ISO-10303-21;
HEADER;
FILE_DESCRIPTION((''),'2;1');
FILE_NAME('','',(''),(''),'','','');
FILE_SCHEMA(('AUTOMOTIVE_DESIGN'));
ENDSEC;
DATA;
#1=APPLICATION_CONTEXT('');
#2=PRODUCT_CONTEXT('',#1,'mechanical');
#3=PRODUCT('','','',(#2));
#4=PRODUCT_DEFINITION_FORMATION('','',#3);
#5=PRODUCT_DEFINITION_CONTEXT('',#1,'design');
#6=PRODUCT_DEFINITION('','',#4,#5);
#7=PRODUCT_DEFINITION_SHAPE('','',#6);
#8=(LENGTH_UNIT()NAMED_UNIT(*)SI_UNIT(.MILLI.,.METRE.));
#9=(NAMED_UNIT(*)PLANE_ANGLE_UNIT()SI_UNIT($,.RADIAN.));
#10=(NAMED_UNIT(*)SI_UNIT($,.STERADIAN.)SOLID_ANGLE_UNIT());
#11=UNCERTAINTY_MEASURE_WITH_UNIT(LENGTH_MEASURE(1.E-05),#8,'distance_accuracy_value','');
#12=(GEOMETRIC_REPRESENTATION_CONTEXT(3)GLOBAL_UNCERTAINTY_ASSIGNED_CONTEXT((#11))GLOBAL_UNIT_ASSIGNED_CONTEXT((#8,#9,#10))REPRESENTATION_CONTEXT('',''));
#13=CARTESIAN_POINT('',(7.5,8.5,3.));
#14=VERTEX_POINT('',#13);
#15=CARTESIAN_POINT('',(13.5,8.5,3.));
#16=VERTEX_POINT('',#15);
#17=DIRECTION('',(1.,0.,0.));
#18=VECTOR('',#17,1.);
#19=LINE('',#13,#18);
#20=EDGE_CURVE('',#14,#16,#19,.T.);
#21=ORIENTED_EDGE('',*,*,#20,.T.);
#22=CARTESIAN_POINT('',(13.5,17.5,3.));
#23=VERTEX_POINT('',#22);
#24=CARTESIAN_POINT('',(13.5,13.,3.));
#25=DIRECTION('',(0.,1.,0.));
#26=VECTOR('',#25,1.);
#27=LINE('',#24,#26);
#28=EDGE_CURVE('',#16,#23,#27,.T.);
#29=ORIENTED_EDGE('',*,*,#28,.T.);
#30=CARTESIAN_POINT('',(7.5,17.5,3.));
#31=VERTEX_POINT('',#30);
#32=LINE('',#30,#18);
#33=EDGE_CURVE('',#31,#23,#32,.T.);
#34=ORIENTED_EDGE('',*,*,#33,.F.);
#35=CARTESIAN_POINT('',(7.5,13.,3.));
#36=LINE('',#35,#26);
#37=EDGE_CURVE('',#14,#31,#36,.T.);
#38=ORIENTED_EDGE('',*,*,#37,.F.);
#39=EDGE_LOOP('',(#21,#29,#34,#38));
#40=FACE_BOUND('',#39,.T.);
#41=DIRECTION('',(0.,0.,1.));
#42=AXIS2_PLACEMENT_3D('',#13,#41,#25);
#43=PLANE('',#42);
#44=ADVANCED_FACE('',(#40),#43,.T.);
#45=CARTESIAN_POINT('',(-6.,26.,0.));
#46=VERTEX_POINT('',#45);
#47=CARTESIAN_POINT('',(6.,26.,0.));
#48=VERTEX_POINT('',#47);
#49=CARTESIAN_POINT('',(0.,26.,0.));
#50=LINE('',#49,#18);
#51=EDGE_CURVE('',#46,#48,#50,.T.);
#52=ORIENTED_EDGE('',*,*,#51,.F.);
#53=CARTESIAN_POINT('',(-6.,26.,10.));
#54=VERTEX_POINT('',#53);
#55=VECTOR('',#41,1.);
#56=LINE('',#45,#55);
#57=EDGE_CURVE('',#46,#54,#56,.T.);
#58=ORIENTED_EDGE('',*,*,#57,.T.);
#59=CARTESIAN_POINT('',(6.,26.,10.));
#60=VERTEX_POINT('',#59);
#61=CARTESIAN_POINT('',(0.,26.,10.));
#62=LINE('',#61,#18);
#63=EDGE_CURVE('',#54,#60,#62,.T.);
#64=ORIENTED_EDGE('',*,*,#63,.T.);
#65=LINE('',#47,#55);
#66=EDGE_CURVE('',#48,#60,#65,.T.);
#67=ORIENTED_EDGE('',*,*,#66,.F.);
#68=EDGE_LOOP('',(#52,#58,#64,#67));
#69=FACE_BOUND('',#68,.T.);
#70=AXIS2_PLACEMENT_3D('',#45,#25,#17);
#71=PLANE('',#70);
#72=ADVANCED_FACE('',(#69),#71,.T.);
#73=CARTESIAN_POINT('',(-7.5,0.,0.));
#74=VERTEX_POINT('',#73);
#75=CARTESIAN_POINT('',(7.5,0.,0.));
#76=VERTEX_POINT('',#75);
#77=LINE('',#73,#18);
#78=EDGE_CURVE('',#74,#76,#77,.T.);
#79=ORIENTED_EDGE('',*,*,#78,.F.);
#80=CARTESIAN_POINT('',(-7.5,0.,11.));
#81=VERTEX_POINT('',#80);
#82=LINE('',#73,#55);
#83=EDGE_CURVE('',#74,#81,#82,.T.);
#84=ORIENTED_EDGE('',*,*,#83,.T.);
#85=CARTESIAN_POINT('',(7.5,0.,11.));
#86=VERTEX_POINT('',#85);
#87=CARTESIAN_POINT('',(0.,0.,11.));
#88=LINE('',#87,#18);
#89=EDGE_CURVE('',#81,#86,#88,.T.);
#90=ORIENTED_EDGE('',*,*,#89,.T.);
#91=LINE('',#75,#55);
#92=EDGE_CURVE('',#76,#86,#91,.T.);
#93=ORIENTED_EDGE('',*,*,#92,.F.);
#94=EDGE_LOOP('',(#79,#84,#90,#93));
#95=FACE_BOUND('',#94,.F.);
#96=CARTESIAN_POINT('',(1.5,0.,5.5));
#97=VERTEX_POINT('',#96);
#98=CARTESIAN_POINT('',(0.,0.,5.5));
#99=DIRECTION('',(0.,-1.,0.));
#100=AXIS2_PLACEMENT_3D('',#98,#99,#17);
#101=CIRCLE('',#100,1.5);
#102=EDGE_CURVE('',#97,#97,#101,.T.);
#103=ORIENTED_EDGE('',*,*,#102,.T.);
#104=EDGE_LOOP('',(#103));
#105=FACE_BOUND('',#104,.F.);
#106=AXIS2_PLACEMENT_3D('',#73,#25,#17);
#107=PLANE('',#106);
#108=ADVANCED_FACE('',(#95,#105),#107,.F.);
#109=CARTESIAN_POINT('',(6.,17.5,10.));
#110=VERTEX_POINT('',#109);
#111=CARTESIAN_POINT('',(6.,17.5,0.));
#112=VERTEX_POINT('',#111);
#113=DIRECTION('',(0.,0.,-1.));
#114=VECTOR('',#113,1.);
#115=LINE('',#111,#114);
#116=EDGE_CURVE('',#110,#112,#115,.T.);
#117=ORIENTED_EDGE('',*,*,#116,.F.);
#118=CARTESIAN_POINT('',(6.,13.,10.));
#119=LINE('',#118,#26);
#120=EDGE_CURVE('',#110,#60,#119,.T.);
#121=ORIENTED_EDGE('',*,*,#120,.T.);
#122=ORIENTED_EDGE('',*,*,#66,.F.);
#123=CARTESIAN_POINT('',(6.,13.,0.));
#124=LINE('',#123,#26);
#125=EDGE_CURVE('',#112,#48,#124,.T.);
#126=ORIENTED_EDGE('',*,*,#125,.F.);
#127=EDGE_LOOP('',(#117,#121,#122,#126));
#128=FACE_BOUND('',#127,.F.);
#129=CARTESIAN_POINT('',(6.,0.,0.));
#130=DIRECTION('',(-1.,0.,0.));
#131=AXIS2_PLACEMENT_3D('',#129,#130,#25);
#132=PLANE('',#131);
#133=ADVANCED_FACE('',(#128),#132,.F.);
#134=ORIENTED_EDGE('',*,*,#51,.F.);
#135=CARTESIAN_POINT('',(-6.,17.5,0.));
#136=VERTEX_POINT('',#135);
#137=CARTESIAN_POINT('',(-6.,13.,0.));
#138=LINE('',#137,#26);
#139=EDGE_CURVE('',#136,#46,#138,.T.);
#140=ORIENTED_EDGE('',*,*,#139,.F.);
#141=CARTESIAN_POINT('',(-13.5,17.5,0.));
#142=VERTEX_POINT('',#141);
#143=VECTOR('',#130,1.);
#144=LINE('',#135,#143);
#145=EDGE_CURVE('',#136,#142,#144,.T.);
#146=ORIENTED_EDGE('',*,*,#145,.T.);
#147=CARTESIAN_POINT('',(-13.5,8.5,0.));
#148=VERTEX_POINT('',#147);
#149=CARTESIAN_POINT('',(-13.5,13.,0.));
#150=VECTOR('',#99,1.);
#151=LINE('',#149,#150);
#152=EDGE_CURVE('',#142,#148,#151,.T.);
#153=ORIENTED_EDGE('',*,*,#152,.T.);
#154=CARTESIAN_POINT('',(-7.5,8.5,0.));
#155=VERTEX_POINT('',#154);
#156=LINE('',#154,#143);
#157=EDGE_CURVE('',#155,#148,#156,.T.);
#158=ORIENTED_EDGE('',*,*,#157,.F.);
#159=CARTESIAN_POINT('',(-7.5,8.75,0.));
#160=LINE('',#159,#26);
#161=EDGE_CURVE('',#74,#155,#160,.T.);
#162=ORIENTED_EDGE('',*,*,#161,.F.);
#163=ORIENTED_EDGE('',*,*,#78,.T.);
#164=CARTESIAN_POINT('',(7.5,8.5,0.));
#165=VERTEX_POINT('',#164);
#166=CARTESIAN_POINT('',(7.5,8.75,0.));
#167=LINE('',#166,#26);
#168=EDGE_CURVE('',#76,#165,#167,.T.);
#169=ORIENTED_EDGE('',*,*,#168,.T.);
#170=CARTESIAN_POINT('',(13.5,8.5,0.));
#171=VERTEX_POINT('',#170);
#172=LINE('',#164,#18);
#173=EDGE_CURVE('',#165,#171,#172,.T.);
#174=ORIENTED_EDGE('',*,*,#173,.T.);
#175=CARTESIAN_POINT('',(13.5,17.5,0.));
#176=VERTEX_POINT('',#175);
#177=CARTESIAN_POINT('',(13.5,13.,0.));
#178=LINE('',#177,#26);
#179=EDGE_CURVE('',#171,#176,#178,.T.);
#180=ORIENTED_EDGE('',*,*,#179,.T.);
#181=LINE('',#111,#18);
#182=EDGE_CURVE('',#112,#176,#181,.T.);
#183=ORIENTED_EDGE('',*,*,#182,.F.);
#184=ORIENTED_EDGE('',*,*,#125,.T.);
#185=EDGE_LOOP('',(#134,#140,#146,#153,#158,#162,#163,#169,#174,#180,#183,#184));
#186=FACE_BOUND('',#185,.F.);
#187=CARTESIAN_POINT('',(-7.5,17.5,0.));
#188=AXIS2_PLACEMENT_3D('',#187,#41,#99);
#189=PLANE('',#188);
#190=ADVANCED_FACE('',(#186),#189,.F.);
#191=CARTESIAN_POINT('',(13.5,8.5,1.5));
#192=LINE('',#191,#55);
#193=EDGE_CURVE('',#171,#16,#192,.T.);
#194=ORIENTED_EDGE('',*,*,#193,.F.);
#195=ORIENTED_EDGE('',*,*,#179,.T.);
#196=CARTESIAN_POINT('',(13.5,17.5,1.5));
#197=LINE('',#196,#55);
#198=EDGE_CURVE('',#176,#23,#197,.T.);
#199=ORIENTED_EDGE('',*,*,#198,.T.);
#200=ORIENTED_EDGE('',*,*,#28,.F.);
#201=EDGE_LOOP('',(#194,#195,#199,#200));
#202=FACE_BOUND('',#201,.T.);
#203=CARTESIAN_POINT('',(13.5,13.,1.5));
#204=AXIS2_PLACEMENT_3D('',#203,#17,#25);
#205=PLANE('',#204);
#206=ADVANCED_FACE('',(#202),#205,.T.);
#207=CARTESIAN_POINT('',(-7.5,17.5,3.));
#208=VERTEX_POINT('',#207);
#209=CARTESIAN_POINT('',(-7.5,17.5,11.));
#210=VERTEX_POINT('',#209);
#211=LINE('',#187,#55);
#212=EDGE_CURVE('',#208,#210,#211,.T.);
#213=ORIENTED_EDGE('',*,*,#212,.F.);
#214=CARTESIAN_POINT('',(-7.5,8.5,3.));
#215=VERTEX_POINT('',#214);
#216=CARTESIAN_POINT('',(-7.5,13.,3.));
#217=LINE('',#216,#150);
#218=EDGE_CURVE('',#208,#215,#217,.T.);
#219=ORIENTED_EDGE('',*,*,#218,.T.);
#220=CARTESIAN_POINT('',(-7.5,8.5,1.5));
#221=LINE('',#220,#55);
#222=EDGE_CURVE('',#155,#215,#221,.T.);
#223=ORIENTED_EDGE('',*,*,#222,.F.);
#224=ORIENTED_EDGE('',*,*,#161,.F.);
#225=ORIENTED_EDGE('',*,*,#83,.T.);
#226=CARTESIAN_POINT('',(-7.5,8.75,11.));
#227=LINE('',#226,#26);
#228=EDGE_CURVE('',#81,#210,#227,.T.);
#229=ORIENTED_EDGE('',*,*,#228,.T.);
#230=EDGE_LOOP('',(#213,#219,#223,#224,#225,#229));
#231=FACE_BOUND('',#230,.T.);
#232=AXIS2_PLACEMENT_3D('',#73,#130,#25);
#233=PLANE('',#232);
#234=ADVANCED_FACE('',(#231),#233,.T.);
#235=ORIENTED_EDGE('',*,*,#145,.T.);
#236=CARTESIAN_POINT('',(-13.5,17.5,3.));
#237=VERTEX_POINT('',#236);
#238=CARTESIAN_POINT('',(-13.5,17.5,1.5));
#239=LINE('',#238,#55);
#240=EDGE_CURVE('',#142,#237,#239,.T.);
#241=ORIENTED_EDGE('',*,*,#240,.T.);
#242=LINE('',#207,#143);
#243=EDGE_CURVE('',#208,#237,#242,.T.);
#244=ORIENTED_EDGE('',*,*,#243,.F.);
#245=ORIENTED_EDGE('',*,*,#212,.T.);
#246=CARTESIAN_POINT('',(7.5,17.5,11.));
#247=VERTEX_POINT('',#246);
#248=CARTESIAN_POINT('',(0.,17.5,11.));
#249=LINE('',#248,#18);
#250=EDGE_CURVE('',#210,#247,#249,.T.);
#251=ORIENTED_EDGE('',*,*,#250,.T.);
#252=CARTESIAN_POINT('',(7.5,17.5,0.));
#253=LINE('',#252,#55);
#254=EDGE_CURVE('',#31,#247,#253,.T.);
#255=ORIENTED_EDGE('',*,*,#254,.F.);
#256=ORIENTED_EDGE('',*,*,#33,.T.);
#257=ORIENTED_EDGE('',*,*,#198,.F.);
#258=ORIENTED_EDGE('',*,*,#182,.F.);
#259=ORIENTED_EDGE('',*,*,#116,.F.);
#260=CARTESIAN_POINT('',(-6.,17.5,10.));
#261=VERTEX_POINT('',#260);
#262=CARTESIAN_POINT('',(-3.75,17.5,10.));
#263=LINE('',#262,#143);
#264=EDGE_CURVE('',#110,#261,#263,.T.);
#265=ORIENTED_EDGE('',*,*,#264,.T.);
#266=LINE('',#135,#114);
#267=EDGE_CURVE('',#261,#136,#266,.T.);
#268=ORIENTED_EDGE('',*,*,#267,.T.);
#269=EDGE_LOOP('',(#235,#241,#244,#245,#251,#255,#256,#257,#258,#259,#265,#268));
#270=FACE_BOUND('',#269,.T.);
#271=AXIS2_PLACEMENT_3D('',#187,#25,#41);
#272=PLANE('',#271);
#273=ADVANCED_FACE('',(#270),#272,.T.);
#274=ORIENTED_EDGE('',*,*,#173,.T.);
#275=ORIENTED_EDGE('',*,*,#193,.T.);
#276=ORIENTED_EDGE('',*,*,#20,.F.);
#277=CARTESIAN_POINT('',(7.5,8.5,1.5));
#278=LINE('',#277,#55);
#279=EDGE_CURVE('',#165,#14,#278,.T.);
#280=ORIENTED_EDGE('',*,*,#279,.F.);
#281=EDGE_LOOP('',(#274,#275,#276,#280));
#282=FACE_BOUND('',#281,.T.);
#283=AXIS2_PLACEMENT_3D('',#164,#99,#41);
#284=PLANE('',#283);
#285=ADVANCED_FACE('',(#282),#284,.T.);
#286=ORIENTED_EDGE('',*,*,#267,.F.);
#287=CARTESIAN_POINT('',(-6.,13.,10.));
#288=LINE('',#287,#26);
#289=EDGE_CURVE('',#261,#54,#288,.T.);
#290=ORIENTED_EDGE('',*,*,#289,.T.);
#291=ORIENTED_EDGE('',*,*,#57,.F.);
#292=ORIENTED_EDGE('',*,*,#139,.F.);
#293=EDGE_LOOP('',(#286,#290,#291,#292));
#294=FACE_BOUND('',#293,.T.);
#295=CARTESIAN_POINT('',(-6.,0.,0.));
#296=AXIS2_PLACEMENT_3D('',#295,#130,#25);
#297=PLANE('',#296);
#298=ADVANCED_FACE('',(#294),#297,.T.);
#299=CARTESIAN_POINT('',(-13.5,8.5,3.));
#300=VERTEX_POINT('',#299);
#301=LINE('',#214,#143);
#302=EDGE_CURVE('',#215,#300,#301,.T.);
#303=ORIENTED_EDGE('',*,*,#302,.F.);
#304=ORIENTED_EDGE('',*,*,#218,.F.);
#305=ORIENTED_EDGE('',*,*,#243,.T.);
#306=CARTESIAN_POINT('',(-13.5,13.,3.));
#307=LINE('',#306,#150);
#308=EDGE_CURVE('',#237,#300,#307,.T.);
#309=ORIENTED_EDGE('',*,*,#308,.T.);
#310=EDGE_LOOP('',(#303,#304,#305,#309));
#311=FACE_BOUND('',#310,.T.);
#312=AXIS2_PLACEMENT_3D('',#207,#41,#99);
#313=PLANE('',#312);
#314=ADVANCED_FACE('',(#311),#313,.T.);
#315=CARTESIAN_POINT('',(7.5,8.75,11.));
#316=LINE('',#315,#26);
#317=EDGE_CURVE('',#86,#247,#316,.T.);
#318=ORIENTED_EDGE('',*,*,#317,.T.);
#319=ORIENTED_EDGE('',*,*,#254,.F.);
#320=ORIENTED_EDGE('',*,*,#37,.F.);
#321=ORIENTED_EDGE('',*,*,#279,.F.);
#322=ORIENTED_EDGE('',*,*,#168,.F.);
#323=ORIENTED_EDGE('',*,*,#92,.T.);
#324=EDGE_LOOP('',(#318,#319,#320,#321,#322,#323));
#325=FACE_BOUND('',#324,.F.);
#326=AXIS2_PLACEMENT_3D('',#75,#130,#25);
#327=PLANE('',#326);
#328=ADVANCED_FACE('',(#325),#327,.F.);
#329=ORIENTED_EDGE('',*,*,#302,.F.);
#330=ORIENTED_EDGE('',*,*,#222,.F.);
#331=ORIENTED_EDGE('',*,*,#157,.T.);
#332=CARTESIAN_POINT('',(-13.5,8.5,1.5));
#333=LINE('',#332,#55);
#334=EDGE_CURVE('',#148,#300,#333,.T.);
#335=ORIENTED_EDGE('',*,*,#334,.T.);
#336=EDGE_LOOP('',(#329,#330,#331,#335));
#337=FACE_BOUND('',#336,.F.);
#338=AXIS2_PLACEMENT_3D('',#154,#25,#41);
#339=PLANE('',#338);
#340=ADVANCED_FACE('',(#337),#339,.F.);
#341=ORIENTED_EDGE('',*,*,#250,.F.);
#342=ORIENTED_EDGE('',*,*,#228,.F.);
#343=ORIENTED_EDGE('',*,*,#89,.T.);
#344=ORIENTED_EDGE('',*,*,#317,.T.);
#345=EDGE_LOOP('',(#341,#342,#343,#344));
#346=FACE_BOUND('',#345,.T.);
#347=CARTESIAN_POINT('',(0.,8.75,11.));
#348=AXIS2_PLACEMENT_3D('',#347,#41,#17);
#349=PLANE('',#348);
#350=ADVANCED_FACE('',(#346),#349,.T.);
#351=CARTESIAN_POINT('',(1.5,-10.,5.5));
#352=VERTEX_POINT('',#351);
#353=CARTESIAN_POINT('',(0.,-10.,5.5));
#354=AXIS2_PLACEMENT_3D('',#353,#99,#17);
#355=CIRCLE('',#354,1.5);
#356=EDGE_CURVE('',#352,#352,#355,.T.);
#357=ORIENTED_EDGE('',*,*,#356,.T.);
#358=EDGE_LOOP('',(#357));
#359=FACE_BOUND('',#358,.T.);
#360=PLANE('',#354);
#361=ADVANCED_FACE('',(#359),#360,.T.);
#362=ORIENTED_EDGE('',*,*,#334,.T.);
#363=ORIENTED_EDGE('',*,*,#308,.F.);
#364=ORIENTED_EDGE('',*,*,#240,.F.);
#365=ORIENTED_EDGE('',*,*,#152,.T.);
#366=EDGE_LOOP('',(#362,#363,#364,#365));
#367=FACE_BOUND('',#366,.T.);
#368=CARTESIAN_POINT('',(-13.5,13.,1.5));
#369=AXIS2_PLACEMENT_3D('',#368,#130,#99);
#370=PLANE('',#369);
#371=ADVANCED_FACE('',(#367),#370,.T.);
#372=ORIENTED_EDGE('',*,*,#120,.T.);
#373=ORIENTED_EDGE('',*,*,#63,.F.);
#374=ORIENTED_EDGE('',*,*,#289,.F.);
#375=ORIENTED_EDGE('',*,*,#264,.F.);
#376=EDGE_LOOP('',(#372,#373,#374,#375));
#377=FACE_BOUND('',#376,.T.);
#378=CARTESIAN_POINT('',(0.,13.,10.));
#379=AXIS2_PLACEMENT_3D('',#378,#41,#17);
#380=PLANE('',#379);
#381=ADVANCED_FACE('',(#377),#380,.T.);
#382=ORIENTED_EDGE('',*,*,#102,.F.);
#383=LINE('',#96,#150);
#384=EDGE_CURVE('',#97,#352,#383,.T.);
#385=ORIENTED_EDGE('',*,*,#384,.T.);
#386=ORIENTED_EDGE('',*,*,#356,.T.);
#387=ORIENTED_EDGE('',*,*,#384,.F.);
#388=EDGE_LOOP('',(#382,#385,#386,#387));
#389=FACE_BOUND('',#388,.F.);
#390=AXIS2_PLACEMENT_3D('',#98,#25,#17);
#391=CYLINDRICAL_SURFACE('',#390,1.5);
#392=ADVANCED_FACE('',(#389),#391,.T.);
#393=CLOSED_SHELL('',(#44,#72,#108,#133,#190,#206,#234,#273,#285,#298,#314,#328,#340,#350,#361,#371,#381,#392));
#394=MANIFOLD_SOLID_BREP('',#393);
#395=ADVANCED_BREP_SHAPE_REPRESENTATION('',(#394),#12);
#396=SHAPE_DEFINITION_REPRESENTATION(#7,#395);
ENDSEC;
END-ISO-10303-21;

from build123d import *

# Parameters (mm, degrees)
F0_W     = 12
F0_H     = 26
F1_DEPTH = 10
F2_W     = 15
F2_H     = 17.5
F3_DEPTH = 11
F4_W     = 9
F4_H     = 3
F5_DEPTH = 6
F6_W     = 9
F6_H     = 3
F7_DEPTH = 6
F8_R     = 1.5
F9_DEPTH = 10


# Not quite as in the source:
# - a feature names something its author has since deleted; it is built from what else it names


with BuildPart() as f1:
    # F0 (on Top) → F1 (new body)
    with BuildSketch(Plane.XY):
        with Locations((0, 13)):
            Rectangle(F0_W, F0_H)
    extrude(amount=F1_DEPTH)

    # F2 (on Top) → F3 (join)
    with BuildSketch(Plane.XY):
        with Locations((0, 8.75)):
            Rectangle(F2_W, F2_H)
    extrude(amount=F3_DEPTH)

    # F4 (on face) → F5 (join)
    with BuildSketch(Plane.YZ.offset(7.5)):
        with Locations((13, 1.5)):
            Rectangle(F4_W, F4_H)
    extrude(amount=F5_DEPTH)

    # F6 (on face) → F7 (join)
    with BuildSketch(Plane(origin=(-7.5, 0, 0), x_dir=(0, -1, 0), z_dir=(-1, 0, 0))):
        with Locations((-13, 1.5)):
            Rectangle(F6_W, F6_H)
    extrude(amount=F7_DEPTH)

    # F8 (on face) → F9 (join)
    with BuildSketch(Plane.XZ):
        with Locations((0, 5.5)):
            Circle(F8_R)
    extrude(amount=F9_DEPTH)


solid = f1.part
